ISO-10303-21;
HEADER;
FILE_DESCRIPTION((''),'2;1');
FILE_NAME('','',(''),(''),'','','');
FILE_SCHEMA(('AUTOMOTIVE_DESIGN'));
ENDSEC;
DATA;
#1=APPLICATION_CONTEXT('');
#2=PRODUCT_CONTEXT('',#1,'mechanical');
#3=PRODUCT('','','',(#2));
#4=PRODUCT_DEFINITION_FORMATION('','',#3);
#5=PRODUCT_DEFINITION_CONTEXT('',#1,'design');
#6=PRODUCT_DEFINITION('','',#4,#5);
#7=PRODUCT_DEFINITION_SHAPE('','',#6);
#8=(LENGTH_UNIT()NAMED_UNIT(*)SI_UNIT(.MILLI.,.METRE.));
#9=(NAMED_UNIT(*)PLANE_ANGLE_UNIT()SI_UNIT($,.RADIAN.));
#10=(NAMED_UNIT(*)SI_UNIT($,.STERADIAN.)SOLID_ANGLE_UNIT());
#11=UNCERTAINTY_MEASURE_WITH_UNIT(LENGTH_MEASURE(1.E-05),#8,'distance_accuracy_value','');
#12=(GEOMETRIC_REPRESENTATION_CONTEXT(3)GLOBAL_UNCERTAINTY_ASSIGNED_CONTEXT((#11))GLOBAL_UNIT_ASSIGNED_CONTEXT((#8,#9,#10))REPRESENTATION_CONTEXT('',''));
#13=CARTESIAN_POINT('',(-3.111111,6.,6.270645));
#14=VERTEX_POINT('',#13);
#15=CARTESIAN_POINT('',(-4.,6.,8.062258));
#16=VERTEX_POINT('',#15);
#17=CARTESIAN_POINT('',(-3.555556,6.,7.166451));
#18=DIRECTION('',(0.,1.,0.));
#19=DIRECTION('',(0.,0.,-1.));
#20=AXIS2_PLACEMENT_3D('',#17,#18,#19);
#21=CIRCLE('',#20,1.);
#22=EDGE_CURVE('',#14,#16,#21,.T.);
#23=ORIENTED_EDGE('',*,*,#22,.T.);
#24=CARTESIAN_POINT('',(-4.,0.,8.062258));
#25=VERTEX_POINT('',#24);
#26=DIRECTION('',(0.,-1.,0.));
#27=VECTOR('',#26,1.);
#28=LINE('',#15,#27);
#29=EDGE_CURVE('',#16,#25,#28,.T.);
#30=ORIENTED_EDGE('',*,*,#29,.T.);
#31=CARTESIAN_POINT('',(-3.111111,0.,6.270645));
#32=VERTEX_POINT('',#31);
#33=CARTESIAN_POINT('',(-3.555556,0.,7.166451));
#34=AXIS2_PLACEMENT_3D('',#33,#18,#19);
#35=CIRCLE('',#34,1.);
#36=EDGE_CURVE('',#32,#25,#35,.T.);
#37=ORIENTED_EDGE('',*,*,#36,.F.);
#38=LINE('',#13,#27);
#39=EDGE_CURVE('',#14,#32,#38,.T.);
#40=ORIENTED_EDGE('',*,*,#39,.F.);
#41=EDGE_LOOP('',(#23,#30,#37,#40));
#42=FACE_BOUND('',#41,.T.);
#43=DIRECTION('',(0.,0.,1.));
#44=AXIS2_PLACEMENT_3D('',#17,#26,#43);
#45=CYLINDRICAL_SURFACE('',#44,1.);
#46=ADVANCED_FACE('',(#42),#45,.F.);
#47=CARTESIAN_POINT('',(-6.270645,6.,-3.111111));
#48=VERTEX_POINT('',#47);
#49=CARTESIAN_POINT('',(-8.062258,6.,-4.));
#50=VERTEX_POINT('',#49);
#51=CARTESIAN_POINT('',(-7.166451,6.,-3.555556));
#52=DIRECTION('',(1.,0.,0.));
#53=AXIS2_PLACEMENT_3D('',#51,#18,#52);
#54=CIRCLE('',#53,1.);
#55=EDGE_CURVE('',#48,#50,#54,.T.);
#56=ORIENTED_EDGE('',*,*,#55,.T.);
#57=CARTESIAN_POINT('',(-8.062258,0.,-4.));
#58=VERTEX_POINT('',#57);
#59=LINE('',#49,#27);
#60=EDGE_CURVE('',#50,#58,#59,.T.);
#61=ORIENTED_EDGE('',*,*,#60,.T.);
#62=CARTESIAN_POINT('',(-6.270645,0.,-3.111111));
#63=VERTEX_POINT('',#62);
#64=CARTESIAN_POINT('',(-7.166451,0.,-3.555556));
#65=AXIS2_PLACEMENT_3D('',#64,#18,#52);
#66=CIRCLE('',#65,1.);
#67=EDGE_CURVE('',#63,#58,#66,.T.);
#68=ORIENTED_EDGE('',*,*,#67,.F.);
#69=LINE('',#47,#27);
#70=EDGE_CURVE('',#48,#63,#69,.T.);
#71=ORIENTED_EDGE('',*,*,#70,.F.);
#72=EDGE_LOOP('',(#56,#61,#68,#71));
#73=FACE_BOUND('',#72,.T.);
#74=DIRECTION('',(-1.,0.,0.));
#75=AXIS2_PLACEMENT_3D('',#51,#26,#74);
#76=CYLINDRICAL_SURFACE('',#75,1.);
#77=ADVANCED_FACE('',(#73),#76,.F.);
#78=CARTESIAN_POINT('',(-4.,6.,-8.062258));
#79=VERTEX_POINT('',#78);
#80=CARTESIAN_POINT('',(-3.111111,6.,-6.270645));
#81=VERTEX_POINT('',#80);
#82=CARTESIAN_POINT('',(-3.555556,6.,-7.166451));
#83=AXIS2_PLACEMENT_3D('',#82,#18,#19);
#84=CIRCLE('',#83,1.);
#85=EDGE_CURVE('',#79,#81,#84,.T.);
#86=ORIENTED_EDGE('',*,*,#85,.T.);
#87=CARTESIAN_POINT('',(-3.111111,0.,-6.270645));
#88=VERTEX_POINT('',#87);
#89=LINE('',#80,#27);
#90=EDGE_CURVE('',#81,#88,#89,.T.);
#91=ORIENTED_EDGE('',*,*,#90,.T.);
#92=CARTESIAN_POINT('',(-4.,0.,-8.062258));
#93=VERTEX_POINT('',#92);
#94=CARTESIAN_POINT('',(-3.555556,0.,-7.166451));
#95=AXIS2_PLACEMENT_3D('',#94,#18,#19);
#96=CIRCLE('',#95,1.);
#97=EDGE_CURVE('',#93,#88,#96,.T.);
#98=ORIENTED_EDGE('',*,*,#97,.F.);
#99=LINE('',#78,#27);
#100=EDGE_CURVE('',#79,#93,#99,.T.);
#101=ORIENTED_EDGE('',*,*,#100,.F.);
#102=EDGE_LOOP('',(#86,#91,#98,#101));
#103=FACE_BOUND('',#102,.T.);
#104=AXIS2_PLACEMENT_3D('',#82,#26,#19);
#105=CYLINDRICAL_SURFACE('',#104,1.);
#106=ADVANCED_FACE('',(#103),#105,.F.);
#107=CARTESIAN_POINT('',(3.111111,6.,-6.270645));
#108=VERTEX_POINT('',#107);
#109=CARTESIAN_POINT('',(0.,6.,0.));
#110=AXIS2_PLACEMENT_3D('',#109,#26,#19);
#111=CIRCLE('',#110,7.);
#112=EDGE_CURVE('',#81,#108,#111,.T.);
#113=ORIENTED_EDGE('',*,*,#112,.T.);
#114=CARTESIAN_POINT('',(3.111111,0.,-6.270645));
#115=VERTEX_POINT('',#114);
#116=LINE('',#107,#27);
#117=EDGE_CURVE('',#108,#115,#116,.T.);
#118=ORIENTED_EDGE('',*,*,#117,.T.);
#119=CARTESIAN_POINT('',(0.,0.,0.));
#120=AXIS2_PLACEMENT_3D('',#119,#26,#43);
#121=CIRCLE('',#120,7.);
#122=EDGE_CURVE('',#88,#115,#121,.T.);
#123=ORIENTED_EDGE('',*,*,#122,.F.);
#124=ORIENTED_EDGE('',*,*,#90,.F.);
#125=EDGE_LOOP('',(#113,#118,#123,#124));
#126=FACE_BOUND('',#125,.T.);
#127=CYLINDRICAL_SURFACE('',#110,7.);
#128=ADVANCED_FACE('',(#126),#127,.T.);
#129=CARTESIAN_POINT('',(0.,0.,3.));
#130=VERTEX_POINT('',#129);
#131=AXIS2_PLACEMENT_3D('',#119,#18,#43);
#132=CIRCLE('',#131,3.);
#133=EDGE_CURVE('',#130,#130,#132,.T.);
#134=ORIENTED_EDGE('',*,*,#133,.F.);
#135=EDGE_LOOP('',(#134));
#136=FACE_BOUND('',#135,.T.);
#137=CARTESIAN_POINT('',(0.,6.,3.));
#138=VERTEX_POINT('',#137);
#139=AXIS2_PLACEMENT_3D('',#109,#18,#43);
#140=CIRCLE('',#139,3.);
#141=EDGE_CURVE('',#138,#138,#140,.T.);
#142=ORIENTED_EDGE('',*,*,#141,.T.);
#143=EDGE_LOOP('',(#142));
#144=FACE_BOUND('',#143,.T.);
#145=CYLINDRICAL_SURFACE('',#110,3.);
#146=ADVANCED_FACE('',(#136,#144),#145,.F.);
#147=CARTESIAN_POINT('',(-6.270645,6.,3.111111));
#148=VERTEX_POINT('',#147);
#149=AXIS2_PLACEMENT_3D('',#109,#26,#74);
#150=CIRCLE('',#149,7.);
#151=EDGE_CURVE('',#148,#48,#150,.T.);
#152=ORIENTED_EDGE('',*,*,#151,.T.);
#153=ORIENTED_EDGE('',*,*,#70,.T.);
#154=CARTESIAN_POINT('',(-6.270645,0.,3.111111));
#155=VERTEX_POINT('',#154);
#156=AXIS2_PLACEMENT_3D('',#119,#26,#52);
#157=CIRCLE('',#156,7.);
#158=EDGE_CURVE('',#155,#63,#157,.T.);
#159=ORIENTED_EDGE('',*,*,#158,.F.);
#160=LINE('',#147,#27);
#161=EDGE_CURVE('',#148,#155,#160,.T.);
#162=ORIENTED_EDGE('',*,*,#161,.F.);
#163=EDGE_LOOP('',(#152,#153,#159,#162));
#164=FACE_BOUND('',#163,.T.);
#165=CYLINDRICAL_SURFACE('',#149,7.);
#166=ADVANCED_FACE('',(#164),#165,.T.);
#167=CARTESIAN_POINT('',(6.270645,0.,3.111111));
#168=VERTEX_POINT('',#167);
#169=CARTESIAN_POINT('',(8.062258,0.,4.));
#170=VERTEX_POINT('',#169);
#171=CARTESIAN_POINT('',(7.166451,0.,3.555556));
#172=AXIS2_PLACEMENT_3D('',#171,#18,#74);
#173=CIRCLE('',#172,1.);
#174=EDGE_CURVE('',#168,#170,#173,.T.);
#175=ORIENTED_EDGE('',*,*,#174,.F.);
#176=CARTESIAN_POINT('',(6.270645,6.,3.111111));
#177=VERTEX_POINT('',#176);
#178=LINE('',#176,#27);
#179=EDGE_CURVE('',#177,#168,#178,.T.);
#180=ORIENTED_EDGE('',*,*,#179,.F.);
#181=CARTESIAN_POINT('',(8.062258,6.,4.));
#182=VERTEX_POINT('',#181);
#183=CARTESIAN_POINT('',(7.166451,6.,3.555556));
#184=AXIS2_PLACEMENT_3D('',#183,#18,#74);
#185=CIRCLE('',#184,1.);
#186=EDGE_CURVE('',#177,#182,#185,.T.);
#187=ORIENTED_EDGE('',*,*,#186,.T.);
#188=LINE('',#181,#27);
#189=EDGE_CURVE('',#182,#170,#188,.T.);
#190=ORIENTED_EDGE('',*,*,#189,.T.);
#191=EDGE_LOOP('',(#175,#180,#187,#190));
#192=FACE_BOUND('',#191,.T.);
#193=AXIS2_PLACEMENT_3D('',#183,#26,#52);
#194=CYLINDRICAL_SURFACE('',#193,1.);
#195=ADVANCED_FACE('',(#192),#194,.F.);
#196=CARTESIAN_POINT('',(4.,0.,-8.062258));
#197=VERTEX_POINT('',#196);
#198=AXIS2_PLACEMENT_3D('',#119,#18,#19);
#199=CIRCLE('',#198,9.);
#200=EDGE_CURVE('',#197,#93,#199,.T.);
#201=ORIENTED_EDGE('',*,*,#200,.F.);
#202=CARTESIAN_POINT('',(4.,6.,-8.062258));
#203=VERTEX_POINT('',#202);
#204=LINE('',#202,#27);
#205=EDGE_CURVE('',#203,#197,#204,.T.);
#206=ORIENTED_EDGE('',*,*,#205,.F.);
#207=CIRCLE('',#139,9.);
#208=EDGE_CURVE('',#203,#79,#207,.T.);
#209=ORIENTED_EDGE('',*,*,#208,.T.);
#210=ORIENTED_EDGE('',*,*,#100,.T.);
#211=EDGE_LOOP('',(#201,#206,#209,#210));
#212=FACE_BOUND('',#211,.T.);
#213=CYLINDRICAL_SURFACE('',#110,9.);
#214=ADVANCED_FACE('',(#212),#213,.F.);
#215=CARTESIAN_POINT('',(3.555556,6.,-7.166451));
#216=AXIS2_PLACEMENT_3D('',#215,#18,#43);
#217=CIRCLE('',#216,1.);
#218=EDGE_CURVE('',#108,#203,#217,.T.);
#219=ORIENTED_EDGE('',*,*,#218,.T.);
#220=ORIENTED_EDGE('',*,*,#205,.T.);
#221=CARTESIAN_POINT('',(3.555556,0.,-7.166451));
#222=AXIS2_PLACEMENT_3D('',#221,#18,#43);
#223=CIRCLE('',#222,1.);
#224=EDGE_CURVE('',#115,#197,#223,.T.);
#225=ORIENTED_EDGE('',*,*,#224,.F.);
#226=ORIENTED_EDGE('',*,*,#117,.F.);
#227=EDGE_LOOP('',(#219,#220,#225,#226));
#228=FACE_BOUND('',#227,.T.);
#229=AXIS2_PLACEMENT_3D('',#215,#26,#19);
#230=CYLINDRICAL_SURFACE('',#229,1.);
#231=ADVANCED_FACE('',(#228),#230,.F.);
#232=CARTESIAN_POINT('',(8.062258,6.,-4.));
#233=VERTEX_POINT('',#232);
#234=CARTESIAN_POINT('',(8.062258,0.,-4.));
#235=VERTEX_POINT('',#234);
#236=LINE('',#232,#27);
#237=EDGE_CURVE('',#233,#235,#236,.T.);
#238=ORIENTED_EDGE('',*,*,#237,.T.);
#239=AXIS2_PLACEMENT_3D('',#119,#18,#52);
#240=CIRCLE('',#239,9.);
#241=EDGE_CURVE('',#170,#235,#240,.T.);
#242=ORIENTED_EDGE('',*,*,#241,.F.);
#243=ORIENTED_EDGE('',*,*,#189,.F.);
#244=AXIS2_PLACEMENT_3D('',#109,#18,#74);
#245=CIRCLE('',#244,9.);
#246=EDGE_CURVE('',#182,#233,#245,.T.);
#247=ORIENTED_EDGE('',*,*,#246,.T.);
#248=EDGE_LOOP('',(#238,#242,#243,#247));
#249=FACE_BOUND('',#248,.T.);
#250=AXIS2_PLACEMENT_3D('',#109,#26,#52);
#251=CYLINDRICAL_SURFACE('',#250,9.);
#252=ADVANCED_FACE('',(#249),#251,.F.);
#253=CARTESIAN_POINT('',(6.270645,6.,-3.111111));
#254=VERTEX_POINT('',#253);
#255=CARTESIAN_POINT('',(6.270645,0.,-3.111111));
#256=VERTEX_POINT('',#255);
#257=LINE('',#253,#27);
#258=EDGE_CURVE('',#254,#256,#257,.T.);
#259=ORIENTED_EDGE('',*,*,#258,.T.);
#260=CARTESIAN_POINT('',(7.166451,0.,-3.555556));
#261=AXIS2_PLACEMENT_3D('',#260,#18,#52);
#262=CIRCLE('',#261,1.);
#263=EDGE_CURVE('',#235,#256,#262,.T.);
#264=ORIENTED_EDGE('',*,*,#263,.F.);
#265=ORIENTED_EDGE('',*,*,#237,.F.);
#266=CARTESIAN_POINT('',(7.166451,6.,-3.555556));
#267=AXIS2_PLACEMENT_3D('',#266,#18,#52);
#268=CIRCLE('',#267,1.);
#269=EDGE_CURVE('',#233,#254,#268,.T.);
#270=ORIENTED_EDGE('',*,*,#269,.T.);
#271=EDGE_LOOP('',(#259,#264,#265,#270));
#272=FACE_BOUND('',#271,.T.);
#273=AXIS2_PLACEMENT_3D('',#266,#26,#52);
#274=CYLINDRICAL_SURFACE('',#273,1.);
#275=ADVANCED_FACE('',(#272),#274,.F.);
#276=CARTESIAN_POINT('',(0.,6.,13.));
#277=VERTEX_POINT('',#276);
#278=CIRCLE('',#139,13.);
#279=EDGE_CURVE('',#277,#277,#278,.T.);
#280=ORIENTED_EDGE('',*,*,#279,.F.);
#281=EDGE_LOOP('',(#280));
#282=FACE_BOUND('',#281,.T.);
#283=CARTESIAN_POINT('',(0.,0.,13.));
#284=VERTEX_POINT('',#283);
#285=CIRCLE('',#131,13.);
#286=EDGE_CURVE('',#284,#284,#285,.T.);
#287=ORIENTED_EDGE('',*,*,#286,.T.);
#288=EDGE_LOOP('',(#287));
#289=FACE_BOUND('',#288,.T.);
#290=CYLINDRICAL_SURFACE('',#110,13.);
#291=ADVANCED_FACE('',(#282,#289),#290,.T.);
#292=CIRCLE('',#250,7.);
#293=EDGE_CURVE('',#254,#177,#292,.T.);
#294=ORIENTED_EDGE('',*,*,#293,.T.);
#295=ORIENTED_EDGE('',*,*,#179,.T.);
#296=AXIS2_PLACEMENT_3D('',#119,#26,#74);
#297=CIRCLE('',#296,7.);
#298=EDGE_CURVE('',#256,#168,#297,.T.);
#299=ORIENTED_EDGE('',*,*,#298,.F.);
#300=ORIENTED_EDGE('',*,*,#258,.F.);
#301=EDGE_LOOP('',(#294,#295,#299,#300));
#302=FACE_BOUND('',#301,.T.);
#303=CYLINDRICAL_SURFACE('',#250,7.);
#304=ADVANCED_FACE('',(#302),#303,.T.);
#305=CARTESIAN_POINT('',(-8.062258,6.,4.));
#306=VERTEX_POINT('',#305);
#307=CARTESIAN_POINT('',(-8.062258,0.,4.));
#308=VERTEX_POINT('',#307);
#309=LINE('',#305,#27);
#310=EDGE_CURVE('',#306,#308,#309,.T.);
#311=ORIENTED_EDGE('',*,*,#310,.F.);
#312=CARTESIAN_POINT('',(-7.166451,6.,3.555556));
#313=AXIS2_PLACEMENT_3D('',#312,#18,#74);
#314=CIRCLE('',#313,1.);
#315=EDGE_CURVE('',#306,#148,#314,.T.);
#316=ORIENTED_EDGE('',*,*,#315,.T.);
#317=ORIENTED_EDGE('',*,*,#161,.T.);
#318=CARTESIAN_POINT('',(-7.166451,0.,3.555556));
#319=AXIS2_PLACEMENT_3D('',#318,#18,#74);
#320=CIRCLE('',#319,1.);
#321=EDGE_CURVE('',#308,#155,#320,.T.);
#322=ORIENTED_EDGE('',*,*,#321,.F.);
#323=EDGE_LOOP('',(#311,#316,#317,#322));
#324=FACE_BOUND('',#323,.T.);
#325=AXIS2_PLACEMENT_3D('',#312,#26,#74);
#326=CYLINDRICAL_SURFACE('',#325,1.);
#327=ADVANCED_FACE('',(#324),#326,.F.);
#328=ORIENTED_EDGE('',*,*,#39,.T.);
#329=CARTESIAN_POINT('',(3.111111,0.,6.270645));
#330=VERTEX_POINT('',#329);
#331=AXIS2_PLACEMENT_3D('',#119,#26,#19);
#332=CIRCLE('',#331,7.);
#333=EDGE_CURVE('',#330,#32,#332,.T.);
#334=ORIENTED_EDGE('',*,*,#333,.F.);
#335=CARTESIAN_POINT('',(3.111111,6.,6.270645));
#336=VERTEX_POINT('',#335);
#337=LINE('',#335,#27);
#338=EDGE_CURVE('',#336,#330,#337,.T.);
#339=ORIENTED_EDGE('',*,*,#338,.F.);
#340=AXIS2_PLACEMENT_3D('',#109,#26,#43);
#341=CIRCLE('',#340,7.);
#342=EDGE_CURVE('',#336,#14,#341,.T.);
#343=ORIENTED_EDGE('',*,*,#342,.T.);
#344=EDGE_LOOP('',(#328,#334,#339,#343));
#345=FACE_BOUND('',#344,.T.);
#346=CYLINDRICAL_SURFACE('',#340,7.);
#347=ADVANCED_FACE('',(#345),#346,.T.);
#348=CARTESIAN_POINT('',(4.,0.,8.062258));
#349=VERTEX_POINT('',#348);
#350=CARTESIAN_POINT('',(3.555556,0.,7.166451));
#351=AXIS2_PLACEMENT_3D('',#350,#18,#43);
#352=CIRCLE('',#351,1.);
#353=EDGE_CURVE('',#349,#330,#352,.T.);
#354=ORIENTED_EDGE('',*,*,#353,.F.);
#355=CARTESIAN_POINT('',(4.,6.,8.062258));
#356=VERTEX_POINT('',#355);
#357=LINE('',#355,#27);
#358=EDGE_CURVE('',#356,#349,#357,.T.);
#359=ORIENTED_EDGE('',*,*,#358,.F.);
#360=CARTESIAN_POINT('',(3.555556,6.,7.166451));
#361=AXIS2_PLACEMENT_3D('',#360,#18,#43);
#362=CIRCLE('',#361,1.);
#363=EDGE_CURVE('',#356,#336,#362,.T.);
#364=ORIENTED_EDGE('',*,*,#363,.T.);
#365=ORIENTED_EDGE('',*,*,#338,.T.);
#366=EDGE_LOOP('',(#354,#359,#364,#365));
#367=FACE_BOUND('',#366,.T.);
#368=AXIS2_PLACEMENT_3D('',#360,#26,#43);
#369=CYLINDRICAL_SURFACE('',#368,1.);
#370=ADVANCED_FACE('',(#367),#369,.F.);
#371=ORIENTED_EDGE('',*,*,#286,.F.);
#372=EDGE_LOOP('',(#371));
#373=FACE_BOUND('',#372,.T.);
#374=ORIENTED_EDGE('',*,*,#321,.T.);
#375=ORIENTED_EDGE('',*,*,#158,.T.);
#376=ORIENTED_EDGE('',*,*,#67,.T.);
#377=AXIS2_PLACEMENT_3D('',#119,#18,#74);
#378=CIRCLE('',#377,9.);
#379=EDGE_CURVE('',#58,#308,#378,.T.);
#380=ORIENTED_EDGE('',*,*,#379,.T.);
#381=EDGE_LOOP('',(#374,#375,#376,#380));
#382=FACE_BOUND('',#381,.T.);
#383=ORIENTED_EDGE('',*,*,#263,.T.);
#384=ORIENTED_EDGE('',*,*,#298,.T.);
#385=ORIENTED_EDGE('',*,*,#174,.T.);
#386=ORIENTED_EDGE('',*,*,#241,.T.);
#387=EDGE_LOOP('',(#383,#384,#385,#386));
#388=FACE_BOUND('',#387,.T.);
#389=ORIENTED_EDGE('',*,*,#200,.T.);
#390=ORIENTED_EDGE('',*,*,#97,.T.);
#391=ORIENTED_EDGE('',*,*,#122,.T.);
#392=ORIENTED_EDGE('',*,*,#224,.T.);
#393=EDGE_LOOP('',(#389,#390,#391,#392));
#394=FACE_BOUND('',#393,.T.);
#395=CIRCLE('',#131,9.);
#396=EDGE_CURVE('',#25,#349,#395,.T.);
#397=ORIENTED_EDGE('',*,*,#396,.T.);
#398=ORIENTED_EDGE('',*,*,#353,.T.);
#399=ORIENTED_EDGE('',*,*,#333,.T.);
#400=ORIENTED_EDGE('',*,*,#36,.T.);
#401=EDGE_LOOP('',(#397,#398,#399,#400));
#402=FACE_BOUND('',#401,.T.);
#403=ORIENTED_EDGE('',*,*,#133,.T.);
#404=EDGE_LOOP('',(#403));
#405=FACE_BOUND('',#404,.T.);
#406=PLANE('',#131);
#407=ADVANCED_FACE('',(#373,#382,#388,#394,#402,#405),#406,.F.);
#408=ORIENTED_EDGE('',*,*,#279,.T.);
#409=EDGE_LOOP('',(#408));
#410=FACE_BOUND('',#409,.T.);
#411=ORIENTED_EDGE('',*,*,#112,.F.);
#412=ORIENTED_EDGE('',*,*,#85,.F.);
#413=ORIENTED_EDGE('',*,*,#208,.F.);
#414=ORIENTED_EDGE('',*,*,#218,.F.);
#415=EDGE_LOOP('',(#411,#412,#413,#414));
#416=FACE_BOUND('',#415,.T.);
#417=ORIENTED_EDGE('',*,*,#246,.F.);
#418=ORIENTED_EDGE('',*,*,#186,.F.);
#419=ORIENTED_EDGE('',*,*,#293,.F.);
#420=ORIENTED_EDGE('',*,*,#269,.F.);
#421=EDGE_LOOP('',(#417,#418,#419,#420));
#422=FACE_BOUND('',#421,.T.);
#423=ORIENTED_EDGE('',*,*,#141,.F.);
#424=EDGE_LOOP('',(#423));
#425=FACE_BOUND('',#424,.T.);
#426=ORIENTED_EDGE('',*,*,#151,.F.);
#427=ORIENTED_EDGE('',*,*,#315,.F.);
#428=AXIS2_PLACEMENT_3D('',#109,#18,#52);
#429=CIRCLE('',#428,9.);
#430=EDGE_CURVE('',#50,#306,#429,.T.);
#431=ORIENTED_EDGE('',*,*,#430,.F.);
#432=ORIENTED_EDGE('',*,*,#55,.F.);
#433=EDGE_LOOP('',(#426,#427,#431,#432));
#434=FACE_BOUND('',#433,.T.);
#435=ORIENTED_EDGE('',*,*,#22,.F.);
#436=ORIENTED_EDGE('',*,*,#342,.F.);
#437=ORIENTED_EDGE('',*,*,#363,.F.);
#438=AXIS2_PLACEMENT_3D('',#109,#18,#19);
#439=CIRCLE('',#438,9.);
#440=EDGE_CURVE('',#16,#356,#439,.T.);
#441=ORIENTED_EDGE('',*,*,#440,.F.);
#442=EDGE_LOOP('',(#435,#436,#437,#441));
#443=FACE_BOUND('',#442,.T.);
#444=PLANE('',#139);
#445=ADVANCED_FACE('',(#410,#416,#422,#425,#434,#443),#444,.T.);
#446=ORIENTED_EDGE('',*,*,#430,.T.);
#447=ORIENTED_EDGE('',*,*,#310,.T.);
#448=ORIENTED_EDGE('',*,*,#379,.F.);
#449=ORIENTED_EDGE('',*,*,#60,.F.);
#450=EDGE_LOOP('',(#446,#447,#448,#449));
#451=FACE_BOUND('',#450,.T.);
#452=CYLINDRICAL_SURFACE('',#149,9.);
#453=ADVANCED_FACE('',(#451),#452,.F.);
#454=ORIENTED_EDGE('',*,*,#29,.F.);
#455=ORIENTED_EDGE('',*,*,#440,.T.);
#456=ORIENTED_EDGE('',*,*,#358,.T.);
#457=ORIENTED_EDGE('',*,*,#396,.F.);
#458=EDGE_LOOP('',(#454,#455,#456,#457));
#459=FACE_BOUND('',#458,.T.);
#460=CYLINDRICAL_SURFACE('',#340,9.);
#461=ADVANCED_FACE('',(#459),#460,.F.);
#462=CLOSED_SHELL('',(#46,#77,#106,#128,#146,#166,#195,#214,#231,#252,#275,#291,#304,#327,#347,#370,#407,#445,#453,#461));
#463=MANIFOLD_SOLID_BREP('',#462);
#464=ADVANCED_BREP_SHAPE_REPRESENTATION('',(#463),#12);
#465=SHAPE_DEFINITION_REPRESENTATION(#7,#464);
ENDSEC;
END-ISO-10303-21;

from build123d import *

# Parameters (mm, degrees)
SKETCH1_R           = 13
SKETCH1_R_2         = 3
BOSS_EXTRUDE1_DEPTH = 6
CIRPATTERN1_DEPTH   = 6


# Read off the part's stored shape, not the designer's step: CirPattern1
with BuildPart() as part:
    # Sketch1 → Boss-Extrude1 (new body)
    with BuildSketch(Plane(origin=(0, 0, 0), x_dir=(1, 0, 0), z_dir=(0, 1, 0))):
        with Locations(Location((0, 0, 0), (0, 0, 270))):
            Circle(SKETCH1_R)
        with Locations(Location((0, 0, 0), (0, 0, 270))):
            Circle(SKETCH1_R_2, mode=Mode.SUBTRACT)
        with BuildLine():
            ThreePointArc((-3.111111111, 6.270644915), (-1.597730514, 6.815222462), (0, 7))
            ThreePointArc((0, 7), (1.597730514, 6.815222462), (3.111111111, 6.270644915))
            ThreePointArc((3.111111111, 6.270644915), (4.451361972, 6.722006887), (4, 8.062257748))
            ThreePointArc((4, 8.062257748), (2.054224947, 8.762428879), (0, 9))
            ThreePointArc((0, 9), (-2.054224947, 8.762428879), (-4, 8.062257748))
            ThreePointArc((-4, 8.062257748), (-4.451361972, 6.722006887), (-3.111111111, 6.270644915))
        make_face(mode=Mode.SUBTRACT)
    extrude(amount=BOSS_EXTRUDE1_DEPTH)

    # CirPattern1 outline → CirPattern1 (cut)
    with BuildSketch(Plane(origin=(0, 0, 0), x_dir=(1, 0, 0), z_dir=(0, 1, 0))):
        with BuildLine():
            ThreePointArc((8.062257748, 4), (6.722006887, 4.451361972), (6.270644915, 3.111111111))
            ThreePointArc((6.270644915, 3.111111111), (7, 0), (6.270644915, -3.111111111))
            ThreePointArc((6.270644915, -3.111111111), (6.722006887, -4.451361972), (8.062257748, -4))
            ThreePointArc((8.062257748, -4), (9, 0), (8.062257748, 4))
        make_face()
        with BuildLine():
            ThreePointArc((4, -8.062257748), (4.451361972, -6.722006887), (3.111111111, -6.270644915))
            ThreePointArc((3.111111111, -6.270644915), (0, -7), (-3.111111111, -6.270644915))
            ThreePointArc((-3.111111111, -6.270644915), (-4.451361972, -6.722006887), (-4, -8.062257748))
            ThreePointArc((-4, -8.062257748), (0, -9), (4, -8.062257748))
        make_face()
        with BuildLine():
            ThreePointArc((-8.062257748, -4), (-6.722006887, -4.451361972), (-6.270644915, -3.111111111))
            ThreePointArc((-6.270644915, -3.111111111), (-7, 0), (-6.270644915, 3.111111111))
            ThreePointArc((-6.270644915, 3.111111111), (-6.722006887, 4.451361972), (-8.062257748, 4))
            ThreePointArc((-8.062257748, 4), (-9, 0), (-8.062257748, -4))
        make_face()
    extrude(amount=CIRPATTERN1_DEPTH, mode=Mode.SUBTRACT)


solid = part.part
